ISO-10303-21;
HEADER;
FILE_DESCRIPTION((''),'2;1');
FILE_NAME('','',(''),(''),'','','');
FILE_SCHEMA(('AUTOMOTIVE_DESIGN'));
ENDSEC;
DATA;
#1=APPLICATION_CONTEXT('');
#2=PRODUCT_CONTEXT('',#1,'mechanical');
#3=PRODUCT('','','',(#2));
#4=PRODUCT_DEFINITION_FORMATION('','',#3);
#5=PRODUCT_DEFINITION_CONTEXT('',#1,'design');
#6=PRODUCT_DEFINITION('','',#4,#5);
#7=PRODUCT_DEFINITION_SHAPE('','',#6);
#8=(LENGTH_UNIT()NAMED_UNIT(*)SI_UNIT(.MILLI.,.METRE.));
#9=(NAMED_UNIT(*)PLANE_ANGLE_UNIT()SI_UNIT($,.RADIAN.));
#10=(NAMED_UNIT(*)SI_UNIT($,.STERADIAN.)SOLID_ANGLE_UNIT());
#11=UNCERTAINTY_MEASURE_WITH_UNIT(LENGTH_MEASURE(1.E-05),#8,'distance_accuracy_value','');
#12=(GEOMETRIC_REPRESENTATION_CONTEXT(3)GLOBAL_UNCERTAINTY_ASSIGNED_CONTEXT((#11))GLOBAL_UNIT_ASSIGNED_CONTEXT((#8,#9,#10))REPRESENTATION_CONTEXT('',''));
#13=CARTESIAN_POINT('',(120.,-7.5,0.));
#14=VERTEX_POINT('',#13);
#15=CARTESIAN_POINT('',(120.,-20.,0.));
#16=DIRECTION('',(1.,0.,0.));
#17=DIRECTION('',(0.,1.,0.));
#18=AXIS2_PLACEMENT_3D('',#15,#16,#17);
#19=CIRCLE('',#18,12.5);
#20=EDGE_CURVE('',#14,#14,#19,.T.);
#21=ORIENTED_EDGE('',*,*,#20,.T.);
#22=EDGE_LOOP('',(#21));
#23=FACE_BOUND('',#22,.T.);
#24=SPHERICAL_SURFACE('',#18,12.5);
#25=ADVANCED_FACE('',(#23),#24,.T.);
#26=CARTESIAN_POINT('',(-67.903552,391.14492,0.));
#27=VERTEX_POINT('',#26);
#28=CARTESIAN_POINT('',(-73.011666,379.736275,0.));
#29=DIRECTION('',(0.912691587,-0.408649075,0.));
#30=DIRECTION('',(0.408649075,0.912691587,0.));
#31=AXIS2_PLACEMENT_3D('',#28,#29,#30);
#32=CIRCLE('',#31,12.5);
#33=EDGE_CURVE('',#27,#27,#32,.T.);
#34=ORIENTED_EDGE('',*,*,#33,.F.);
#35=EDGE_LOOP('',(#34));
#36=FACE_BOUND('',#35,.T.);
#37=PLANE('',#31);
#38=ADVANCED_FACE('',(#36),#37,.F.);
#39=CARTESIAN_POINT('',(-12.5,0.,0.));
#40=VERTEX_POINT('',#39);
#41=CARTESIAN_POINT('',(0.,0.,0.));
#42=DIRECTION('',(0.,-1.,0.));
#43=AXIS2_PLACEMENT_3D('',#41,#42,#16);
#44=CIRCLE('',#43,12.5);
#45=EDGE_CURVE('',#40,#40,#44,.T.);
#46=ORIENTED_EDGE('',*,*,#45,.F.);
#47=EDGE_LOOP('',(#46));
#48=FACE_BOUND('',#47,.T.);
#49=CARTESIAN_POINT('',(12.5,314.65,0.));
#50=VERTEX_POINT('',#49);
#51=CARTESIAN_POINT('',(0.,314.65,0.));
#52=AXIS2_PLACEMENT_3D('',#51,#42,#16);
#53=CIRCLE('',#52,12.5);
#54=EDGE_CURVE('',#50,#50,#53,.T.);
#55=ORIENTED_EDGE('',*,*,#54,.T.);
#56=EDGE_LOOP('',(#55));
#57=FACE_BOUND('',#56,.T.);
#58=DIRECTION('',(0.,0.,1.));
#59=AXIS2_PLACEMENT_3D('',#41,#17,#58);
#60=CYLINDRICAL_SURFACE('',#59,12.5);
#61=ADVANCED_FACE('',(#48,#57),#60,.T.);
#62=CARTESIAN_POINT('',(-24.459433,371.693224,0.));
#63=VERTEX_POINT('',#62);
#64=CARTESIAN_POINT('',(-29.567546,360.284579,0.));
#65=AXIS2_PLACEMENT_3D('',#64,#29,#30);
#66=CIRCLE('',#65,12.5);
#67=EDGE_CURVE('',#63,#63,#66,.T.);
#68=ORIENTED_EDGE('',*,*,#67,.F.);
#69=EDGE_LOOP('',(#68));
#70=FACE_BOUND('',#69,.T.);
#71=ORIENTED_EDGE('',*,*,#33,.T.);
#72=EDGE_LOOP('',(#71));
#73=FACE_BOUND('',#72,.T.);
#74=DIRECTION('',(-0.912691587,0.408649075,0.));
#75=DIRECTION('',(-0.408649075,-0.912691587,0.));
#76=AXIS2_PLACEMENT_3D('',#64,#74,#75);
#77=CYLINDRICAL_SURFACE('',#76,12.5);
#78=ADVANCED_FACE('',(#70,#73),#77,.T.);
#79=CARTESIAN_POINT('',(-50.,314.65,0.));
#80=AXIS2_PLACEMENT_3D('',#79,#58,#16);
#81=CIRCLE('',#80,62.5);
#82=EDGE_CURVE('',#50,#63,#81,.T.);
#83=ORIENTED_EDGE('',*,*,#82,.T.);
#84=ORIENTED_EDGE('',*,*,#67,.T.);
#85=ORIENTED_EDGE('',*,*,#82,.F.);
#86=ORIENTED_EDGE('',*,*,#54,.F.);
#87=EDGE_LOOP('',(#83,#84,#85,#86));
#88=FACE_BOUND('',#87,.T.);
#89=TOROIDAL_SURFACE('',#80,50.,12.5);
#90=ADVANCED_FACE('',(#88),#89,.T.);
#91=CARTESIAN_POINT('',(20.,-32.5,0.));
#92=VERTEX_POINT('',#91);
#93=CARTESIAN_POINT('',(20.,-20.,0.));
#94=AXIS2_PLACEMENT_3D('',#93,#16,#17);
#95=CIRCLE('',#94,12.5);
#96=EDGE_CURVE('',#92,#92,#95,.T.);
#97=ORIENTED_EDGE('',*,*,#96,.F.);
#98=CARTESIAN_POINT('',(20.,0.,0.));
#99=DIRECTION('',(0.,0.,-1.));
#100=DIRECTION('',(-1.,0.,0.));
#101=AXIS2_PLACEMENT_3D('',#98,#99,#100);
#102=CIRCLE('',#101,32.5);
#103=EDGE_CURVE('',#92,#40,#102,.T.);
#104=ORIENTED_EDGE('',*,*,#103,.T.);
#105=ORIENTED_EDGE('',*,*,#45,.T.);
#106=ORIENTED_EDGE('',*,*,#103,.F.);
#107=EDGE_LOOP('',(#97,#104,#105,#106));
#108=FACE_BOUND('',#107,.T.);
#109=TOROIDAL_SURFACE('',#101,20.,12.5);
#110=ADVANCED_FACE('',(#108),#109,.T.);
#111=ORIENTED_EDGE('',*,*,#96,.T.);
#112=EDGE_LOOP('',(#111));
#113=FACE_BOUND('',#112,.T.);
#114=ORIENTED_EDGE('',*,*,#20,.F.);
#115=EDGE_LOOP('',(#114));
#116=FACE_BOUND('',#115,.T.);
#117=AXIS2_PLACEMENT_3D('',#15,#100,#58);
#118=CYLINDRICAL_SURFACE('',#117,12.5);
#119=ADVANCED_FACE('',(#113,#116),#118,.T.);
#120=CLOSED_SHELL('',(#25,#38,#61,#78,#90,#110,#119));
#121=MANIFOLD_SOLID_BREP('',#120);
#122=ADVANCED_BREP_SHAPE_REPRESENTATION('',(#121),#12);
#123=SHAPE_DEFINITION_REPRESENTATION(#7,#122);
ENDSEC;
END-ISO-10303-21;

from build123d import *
from build123d.topology import SkipClean

# Parameters (mm, degrees)
SWEEP1_PROFILE_R = 12.5


with BuildPart() as part:
    # Sweep1: sweep along a path in Sketch1
    with BuildLine(Plane.XY) as sweep1_path:
        Line((120, -20), (20, -20))
        ThreePointArc((20, -20), (5.857864376, -14.142135624), (0, 0))
        Line((0, 0), (0, 314.65))
        ThreePointArc((0, 314.65), (-8.037977367, 341.838024139), (-29.567546263, 360.28457937))
        Line((-29.567546263, 360.28457937), (-73.011665824, 379.736275328))
    # Sweep1 profile (on start of the path) → Sweep1 (sweep)
    with BuildSketch(Plane(origin=(120, -20, 0), x_dir=(0, 0, -1), z_dir=(-1, 0, 0))):
        Circle(SWEEP1_PROFILE_R)
    sweep(path=sweep1_path.line)

    # Sketch16 → Revolve1 (revolve)
    with SkipClean():  # the faces are left unmerged after this step: merging them gives an invalid solid
        with BuildSketch(Plane.XY):
            with BuildLine():
                Line((120, -7.5), (120, -32.5))
                ThreePointArc((120, -32.5), (132.5, -20), (120, -7.5))
            make_face()
        revolve(axis=Axis((120, -7.5, 0), (0, -1, 0)))


solid = part.part
